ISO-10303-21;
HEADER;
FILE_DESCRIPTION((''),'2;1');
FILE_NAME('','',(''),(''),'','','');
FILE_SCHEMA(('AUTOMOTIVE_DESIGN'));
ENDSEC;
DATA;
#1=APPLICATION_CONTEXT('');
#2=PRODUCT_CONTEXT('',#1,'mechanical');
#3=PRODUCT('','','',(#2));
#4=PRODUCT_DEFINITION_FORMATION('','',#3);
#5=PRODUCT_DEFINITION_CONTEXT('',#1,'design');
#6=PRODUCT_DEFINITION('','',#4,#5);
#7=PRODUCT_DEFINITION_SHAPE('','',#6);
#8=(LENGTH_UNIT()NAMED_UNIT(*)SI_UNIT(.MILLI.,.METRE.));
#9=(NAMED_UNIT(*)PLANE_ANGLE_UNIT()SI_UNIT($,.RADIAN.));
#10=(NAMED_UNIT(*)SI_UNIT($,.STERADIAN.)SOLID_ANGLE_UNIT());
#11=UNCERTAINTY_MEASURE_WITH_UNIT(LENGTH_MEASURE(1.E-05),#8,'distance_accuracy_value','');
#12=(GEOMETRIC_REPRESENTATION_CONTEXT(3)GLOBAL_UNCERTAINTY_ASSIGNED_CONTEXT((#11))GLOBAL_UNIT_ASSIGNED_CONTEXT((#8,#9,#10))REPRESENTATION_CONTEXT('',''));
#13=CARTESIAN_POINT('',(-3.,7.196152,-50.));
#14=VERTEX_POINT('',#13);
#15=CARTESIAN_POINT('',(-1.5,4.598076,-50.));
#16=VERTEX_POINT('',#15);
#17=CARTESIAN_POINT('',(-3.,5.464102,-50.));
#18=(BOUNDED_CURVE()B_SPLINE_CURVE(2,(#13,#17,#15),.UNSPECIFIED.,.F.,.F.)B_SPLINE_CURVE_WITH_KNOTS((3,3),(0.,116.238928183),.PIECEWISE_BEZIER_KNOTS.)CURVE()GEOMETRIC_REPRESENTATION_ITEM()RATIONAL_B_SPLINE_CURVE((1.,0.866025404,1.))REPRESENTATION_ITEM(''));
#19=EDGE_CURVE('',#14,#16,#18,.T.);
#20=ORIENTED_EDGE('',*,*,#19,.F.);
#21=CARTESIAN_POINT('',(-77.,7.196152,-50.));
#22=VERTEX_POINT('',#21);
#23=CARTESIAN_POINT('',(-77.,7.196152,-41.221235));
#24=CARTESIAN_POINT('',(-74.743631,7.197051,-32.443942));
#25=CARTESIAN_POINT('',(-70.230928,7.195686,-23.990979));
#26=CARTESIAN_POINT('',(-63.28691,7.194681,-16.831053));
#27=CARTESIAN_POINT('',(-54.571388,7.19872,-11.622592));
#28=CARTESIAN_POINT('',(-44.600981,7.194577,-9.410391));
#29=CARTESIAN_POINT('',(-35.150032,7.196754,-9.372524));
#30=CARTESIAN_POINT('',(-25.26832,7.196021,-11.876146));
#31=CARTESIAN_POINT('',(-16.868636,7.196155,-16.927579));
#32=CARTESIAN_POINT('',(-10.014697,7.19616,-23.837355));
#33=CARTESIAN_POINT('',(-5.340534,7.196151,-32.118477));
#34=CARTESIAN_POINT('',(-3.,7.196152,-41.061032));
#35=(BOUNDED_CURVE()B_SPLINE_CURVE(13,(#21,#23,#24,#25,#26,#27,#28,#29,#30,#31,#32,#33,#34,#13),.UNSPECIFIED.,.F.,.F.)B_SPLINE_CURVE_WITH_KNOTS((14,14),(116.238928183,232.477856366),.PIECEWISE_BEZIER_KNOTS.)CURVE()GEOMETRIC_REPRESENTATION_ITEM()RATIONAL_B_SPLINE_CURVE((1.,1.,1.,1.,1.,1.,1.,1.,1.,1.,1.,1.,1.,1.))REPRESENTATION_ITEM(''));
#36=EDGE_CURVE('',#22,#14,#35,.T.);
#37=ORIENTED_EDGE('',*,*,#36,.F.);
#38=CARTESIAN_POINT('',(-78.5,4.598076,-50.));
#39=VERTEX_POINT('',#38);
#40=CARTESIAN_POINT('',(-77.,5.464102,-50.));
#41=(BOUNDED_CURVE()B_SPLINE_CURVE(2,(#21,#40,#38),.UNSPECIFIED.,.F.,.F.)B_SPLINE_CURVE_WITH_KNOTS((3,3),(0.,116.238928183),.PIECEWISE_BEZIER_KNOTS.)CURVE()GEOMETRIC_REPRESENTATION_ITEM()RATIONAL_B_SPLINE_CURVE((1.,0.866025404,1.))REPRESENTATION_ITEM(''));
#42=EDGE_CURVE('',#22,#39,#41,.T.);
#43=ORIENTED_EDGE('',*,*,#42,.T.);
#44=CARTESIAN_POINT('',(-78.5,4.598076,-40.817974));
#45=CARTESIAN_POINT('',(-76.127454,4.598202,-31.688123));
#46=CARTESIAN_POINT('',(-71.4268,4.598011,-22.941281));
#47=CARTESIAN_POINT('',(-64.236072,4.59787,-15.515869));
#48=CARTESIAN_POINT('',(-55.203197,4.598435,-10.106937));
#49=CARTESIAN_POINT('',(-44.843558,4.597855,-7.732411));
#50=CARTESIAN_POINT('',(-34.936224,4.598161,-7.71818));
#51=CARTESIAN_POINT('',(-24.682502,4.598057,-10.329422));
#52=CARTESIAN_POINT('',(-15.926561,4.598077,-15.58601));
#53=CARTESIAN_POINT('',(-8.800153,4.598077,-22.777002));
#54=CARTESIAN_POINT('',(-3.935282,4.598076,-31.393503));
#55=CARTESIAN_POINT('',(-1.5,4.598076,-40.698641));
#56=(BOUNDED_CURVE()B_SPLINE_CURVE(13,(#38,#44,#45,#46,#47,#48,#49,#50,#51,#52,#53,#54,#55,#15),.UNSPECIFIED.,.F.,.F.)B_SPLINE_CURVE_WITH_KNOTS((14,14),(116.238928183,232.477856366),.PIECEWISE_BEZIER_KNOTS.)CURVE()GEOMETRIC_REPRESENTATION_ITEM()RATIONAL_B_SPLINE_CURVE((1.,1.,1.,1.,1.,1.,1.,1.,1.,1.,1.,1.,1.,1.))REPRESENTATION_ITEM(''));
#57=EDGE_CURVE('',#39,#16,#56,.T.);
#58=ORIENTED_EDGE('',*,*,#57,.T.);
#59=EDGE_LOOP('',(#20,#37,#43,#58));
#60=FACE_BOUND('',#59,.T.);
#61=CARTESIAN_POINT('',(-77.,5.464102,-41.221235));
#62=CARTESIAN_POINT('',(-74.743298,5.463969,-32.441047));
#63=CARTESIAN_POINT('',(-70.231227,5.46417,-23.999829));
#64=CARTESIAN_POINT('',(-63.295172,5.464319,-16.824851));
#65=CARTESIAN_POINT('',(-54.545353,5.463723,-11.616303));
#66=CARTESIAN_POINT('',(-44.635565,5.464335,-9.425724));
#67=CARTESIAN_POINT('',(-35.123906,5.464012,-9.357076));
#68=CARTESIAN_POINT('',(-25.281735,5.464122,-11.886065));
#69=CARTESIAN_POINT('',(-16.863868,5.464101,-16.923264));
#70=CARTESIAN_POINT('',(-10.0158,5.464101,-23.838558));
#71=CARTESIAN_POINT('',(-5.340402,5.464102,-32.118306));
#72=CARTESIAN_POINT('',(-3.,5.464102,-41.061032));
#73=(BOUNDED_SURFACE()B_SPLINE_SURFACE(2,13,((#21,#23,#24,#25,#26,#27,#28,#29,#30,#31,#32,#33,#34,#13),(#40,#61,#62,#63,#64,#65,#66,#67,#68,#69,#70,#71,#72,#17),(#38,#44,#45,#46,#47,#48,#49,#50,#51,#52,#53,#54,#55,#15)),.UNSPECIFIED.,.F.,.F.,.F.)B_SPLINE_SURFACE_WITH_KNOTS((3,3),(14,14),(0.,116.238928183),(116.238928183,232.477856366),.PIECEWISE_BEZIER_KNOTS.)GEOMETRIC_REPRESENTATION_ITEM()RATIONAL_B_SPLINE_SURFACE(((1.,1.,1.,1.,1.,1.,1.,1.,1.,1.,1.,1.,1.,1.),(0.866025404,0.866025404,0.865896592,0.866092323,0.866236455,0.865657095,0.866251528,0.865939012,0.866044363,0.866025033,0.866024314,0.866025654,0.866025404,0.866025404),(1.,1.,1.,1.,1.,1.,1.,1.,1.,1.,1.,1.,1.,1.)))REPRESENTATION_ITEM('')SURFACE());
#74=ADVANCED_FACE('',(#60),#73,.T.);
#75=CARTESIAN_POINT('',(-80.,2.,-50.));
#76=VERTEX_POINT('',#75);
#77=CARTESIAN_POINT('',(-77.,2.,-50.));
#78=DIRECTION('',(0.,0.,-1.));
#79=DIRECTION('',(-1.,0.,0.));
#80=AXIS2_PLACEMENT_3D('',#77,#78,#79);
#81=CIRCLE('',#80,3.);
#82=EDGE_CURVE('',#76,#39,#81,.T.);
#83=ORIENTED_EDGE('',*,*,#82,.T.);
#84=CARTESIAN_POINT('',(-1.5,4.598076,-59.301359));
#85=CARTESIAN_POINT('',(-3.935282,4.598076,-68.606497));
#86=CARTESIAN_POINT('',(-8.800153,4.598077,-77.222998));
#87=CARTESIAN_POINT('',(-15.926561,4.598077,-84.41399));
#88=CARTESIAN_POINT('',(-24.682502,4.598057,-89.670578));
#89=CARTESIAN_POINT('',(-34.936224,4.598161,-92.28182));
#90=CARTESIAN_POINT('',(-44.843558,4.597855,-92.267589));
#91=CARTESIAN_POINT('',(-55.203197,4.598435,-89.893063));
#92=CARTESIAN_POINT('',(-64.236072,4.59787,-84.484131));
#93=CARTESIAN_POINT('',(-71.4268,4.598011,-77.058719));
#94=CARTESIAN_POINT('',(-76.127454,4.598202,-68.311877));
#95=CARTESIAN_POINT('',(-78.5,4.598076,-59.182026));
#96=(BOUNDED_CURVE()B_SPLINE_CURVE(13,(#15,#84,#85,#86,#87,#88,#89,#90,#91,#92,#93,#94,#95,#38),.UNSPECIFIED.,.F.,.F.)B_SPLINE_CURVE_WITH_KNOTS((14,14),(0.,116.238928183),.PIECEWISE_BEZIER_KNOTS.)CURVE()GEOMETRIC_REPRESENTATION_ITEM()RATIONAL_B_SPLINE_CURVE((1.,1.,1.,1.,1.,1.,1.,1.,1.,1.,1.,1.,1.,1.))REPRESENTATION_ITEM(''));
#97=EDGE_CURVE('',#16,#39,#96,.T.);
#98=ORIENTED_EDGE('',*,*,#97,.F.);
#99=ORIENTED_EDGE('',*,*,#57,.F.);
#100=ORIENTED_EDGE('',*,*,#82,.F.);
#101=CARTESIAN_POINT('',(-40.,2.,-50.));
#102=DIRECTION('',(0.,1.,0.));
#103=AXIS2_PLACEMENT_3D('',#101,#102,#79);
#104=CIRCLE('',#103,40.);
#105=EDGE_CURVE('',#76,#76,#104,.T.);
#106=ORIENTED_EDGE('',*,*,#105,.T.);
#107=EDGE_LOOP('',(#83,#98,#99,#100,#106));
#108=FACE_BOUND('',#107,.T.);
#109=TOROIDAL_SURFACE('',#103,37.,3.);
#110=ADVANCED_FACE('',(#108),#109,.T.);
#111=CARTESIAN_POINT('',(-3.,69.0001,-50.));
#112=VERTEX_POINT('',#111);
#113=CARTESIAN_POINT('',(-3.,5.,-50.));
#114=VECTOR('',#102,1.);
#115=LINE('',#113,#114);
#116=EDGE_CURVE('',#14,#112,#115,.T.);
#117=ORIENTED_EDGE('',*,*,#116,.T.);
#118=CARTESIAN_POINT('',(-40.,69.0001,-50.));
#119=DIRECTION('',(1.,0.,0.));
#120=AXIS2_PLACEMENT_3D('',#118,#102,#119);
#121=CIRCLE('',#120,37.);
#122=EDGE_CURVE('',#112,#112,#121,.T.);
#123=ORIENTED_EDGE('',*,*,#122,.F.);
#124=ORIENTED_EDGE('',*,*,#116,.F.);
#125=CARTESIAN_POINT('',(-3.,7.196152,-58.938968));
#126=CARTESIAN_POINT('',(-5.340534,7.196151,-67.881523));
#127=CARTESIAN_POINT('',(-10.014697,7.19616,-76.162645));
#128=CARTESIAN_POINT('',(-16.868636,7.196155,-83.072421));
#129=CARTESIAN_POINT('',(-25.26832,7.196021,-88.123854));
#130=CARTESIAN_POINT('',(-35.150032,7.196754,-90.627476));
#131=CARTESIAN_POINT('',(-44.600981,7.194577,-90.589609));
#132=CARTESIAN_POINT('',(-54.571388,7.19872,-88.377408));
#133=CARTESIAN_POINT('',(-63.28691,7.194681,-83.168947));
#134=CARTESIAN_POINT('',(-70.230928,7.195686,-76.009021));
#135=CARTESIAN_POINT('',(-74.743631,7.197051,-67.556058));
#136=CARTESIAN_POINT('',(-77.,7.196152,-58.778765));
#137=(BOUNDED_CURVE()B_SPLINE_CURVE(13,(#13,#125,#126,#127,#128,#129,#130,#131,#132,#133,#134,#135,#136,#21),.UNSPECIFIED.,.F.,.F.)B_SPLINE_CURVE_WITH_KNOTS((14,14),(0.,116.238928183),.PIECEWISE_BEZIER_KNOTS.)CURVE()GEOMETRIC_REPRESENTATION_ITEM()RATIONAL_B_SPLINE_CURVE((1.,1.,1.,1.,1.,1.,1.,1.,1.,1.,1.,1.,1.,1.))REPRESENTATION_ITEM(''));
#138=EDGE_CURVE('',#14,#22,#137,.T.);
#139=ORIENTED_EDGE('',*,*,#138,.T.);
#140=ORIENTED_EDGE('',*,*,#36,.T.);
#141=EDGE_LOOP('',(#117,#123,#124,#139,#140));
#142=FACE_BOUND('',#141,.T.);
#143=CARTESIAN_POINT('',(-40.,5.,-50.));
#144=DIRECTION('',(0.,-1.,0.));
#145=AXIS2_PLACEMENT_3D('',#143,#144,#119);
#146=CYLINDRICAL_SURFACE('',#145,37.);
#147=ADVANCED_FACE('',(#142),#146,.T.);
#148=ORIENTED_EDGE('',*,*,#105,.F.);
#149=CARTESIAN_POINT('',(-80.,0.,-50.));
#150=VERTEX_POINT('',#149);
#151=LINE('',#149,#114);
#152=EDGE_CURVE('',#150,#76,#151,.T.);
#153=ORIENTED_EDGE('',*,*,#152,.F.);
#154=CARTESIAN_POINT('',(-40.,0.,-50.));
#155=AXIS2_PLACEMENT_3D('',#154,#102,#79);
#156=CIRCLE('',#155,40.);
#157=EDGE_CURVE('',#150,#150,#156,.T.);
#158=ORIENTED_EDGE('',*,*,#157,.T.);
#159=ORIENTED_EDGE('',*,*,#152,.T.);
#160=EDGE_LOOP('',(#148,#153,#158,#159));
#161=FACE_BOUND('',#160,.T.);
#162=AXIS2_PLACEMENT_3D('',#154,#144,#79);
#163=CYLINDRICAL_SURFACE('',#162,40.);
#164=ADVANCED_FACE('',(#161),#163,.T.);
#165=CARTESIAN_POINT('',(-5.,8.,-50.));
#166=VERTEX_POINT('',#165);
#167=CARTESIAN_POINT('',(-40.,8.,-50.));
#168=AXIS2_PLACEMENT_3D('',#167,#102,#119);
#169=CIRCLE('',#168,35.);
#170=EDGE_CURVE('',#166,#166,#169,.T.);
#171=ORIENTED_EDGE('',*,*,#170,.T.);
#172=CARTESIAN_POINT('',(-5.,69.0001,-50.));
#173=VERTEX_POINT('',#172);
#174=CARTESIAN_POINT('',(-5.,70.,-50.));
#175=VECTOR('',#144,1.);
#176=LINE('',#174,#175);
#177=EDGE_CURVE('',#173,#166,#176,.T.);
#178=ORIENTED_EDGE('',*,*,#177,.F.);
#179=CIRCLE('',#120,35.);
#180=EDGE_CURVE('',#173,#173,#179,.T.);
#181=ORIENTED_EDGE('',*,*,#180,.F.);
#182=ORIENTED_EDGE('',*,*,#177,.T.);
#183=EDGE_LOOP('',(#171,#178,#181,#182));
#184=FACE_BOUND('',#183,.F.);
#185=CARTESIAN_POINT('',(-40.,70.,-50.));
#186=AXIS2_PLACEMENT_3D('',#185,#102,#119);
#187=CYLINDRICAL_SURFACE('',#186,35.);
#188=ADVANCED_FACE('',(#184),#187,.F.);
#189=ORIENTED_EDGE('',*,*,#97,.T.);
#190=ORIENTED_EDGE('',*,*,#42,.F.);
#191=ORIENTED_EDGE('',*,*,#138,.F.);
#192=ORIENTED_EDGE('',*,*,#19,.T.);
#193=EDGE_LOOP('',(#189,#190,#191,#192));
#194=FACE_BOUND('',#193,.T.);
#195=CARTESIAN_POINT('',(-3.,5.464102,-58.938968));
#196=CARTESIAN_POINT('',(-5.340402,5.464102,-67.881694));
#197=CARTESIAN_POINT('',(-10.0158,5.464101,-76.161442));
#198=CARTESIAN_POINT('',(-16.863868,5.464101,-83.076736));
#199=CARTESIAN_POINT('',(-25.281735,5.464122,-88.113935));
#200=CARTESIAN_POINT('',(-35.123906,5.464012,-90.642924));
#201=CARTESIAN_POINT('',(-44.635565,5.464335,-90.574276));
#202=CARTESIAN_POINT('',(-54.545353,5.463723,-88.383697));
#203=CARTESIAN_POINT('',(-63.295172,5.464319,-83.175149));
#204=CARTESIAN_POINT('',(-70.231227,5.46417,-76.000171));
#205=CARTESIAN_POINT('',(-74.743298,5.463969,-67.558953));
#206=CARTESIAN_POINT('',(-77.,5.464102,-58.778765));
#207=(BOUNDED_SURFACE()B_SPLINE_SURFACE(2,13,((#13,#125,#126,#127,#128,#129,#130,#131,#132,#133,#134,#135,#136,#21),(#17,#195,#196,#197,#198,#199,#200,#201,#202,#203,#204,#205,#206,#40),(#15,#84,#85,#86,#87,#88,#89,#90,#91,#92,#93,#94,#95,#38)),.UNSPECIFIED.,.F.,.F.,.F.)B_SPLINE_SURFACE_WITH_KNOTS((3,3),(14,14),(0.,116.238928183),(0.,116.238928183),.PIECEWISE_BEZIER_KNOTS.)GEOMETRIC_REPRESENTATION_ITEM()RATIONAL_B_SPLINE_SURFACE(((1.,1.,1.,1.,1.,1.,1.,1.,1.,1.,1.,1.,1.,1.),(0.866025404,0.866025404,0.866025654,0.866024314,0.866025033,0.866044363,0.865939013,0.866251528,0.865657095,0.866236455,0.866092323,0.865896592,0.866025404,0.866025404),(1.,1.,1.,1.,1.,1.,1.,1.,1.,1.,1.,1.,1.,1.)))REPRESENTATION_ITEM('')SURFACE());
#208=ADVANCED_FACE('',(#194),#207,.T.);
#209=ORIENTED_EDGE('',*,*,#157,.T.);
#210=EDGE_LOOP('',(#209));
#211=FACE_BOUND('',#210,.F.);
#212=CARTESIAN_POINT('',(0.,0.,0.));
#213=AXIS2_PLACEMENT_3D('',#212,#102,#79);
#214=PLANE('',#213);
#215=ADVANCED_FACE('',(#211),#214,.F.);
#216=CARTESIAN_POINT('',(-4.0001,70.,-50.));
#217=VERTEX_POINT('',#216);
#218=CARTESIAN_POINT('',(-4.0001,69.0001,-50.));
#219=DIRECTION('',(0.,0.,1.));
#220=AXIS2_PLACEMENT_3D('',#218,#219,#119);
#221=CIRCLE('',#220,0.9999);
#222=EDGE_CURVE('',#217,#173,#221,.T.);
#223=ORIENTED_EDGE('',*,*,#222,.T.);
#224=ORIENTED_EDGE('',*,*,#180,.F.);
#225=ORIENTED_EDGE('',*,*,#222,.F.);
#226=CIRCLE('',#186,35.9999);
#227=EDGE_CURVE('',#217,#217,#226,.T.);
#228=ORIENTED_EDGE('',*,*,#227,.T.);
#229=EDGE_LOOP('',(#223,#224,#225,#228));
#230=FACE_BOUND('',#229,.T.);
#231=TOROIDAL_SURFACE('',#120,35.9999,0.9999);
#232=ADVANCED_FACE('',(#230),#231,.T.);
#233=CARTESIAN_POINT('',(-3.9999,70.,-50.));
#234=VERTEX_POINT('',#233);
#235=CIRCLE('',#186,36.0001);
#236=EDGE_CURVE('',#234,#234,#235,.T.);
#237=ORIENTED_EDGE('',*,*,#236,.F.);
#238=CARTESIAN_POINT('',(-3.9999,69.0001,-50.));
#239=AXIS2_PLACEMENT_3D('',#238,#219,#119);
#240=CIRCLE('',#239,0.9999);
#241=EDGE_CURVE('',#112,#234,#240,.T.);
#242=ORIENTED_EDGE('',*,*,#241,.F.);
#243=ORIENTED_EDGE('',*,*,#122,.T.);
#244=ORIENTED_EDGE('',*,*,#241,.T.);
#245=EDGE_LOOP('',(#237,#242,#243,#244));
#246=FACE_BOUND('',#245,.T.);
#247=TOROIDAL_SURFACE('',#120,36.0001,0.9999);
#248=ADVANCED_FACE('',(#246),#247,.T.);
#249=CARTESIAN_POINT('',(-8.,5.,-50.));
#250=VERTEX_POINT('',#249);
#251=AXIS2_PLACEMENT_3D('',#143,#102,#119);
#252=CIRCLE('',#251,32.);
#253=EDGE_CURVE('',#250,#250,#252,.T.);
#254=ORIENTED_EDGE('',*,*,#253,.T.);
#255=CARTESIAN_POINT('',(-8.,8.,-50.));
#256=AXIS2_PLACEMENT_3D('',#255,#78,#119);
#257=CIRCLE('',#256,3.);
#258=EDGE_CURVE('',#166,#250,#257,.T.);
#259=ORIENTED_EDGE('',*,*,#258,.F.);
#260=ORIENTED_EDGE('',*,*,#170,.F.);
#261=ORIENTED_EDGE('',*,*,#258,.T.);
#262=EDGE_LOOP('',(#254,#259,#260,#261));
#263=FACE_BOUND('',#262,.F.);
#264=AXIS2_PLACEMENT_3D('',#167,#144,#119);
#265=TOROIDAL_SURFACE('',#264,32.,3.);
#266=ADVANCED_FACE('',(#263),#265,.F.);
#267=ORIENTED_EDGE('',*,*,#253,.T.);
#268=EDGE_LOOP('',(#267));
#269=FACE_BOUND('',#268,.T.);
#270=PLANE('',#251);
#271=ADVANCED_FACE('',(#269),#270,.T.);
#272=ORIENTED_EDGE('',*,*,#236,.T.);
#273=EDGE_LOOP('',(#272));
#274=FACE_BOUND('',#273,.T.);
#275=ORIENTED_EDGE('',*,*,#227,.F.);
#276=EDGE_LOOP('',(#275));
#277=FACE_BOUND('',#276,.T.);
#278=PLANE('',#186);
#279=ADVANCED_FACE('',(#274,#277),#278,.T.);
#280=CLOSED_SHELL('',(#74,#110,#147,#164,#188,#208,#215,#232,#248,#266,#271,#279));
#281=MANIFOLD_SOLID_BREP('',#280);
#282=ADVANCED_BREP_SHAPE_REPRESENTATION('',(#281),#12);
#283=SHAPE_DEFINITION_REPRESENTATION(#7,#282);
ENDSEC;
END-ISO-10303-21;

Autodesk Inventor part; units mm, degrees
ref_plane "YZ Plane" through (0, 0, 0) normal (1, 0, 0) x (0, 1, 0)
ref_plane "XZ Plane" through (0, 0, 0) normal (0, 1, 0) x (-1, 0, 0)
ref_plane "XY Plane" through (0, 0, 0) normal (0, 0, 1) x (1, 0, 0)
sketch "Schizzo1" plane through (0, 0, 0) normal (0, 1, 0) x (-1, 0, 0)
  circle A0 centre (40, -50) radius 40
  point P0 (0, 0)
extrude "Estrusione1" add sketch "Schizzo1" along normal blind 5
fillet "Raccordo1" radius 3 1 edges at (0, 5, -50)
sketch "Schizzo2" plane through (-40, 5, -50) normal (0, 1, 0) x (1, 0, 0)
  circle A0 centre (0, 0) radius 37
  point P0 (40, -50)
extrude "Estrusione2" add sketch "Schizzo2" along normal blind 65
fillet "Raccordo2" radius 3 2 edges at (-40, 5, -87) (-40, 5, -13)
sketch "Schizzo3" plane through (-40, 70, -50) normal (0, 1, 0) x (1, 0, 0)
  circle A0 centre (0, 0) radius 35
  point P0 (40, -50)
  dimension "d8" = 70
extrude "Estrusione3" cut sketch "Schizzo3" against normal blind 65
fillet "Raccordo3" radius 1 2 edges at (-75, 70, -50) (-77, 70, -50)
fillet "Raccordo4" radius 3 1 edges at (-75, 5, -50)
properties part number "BASE"
